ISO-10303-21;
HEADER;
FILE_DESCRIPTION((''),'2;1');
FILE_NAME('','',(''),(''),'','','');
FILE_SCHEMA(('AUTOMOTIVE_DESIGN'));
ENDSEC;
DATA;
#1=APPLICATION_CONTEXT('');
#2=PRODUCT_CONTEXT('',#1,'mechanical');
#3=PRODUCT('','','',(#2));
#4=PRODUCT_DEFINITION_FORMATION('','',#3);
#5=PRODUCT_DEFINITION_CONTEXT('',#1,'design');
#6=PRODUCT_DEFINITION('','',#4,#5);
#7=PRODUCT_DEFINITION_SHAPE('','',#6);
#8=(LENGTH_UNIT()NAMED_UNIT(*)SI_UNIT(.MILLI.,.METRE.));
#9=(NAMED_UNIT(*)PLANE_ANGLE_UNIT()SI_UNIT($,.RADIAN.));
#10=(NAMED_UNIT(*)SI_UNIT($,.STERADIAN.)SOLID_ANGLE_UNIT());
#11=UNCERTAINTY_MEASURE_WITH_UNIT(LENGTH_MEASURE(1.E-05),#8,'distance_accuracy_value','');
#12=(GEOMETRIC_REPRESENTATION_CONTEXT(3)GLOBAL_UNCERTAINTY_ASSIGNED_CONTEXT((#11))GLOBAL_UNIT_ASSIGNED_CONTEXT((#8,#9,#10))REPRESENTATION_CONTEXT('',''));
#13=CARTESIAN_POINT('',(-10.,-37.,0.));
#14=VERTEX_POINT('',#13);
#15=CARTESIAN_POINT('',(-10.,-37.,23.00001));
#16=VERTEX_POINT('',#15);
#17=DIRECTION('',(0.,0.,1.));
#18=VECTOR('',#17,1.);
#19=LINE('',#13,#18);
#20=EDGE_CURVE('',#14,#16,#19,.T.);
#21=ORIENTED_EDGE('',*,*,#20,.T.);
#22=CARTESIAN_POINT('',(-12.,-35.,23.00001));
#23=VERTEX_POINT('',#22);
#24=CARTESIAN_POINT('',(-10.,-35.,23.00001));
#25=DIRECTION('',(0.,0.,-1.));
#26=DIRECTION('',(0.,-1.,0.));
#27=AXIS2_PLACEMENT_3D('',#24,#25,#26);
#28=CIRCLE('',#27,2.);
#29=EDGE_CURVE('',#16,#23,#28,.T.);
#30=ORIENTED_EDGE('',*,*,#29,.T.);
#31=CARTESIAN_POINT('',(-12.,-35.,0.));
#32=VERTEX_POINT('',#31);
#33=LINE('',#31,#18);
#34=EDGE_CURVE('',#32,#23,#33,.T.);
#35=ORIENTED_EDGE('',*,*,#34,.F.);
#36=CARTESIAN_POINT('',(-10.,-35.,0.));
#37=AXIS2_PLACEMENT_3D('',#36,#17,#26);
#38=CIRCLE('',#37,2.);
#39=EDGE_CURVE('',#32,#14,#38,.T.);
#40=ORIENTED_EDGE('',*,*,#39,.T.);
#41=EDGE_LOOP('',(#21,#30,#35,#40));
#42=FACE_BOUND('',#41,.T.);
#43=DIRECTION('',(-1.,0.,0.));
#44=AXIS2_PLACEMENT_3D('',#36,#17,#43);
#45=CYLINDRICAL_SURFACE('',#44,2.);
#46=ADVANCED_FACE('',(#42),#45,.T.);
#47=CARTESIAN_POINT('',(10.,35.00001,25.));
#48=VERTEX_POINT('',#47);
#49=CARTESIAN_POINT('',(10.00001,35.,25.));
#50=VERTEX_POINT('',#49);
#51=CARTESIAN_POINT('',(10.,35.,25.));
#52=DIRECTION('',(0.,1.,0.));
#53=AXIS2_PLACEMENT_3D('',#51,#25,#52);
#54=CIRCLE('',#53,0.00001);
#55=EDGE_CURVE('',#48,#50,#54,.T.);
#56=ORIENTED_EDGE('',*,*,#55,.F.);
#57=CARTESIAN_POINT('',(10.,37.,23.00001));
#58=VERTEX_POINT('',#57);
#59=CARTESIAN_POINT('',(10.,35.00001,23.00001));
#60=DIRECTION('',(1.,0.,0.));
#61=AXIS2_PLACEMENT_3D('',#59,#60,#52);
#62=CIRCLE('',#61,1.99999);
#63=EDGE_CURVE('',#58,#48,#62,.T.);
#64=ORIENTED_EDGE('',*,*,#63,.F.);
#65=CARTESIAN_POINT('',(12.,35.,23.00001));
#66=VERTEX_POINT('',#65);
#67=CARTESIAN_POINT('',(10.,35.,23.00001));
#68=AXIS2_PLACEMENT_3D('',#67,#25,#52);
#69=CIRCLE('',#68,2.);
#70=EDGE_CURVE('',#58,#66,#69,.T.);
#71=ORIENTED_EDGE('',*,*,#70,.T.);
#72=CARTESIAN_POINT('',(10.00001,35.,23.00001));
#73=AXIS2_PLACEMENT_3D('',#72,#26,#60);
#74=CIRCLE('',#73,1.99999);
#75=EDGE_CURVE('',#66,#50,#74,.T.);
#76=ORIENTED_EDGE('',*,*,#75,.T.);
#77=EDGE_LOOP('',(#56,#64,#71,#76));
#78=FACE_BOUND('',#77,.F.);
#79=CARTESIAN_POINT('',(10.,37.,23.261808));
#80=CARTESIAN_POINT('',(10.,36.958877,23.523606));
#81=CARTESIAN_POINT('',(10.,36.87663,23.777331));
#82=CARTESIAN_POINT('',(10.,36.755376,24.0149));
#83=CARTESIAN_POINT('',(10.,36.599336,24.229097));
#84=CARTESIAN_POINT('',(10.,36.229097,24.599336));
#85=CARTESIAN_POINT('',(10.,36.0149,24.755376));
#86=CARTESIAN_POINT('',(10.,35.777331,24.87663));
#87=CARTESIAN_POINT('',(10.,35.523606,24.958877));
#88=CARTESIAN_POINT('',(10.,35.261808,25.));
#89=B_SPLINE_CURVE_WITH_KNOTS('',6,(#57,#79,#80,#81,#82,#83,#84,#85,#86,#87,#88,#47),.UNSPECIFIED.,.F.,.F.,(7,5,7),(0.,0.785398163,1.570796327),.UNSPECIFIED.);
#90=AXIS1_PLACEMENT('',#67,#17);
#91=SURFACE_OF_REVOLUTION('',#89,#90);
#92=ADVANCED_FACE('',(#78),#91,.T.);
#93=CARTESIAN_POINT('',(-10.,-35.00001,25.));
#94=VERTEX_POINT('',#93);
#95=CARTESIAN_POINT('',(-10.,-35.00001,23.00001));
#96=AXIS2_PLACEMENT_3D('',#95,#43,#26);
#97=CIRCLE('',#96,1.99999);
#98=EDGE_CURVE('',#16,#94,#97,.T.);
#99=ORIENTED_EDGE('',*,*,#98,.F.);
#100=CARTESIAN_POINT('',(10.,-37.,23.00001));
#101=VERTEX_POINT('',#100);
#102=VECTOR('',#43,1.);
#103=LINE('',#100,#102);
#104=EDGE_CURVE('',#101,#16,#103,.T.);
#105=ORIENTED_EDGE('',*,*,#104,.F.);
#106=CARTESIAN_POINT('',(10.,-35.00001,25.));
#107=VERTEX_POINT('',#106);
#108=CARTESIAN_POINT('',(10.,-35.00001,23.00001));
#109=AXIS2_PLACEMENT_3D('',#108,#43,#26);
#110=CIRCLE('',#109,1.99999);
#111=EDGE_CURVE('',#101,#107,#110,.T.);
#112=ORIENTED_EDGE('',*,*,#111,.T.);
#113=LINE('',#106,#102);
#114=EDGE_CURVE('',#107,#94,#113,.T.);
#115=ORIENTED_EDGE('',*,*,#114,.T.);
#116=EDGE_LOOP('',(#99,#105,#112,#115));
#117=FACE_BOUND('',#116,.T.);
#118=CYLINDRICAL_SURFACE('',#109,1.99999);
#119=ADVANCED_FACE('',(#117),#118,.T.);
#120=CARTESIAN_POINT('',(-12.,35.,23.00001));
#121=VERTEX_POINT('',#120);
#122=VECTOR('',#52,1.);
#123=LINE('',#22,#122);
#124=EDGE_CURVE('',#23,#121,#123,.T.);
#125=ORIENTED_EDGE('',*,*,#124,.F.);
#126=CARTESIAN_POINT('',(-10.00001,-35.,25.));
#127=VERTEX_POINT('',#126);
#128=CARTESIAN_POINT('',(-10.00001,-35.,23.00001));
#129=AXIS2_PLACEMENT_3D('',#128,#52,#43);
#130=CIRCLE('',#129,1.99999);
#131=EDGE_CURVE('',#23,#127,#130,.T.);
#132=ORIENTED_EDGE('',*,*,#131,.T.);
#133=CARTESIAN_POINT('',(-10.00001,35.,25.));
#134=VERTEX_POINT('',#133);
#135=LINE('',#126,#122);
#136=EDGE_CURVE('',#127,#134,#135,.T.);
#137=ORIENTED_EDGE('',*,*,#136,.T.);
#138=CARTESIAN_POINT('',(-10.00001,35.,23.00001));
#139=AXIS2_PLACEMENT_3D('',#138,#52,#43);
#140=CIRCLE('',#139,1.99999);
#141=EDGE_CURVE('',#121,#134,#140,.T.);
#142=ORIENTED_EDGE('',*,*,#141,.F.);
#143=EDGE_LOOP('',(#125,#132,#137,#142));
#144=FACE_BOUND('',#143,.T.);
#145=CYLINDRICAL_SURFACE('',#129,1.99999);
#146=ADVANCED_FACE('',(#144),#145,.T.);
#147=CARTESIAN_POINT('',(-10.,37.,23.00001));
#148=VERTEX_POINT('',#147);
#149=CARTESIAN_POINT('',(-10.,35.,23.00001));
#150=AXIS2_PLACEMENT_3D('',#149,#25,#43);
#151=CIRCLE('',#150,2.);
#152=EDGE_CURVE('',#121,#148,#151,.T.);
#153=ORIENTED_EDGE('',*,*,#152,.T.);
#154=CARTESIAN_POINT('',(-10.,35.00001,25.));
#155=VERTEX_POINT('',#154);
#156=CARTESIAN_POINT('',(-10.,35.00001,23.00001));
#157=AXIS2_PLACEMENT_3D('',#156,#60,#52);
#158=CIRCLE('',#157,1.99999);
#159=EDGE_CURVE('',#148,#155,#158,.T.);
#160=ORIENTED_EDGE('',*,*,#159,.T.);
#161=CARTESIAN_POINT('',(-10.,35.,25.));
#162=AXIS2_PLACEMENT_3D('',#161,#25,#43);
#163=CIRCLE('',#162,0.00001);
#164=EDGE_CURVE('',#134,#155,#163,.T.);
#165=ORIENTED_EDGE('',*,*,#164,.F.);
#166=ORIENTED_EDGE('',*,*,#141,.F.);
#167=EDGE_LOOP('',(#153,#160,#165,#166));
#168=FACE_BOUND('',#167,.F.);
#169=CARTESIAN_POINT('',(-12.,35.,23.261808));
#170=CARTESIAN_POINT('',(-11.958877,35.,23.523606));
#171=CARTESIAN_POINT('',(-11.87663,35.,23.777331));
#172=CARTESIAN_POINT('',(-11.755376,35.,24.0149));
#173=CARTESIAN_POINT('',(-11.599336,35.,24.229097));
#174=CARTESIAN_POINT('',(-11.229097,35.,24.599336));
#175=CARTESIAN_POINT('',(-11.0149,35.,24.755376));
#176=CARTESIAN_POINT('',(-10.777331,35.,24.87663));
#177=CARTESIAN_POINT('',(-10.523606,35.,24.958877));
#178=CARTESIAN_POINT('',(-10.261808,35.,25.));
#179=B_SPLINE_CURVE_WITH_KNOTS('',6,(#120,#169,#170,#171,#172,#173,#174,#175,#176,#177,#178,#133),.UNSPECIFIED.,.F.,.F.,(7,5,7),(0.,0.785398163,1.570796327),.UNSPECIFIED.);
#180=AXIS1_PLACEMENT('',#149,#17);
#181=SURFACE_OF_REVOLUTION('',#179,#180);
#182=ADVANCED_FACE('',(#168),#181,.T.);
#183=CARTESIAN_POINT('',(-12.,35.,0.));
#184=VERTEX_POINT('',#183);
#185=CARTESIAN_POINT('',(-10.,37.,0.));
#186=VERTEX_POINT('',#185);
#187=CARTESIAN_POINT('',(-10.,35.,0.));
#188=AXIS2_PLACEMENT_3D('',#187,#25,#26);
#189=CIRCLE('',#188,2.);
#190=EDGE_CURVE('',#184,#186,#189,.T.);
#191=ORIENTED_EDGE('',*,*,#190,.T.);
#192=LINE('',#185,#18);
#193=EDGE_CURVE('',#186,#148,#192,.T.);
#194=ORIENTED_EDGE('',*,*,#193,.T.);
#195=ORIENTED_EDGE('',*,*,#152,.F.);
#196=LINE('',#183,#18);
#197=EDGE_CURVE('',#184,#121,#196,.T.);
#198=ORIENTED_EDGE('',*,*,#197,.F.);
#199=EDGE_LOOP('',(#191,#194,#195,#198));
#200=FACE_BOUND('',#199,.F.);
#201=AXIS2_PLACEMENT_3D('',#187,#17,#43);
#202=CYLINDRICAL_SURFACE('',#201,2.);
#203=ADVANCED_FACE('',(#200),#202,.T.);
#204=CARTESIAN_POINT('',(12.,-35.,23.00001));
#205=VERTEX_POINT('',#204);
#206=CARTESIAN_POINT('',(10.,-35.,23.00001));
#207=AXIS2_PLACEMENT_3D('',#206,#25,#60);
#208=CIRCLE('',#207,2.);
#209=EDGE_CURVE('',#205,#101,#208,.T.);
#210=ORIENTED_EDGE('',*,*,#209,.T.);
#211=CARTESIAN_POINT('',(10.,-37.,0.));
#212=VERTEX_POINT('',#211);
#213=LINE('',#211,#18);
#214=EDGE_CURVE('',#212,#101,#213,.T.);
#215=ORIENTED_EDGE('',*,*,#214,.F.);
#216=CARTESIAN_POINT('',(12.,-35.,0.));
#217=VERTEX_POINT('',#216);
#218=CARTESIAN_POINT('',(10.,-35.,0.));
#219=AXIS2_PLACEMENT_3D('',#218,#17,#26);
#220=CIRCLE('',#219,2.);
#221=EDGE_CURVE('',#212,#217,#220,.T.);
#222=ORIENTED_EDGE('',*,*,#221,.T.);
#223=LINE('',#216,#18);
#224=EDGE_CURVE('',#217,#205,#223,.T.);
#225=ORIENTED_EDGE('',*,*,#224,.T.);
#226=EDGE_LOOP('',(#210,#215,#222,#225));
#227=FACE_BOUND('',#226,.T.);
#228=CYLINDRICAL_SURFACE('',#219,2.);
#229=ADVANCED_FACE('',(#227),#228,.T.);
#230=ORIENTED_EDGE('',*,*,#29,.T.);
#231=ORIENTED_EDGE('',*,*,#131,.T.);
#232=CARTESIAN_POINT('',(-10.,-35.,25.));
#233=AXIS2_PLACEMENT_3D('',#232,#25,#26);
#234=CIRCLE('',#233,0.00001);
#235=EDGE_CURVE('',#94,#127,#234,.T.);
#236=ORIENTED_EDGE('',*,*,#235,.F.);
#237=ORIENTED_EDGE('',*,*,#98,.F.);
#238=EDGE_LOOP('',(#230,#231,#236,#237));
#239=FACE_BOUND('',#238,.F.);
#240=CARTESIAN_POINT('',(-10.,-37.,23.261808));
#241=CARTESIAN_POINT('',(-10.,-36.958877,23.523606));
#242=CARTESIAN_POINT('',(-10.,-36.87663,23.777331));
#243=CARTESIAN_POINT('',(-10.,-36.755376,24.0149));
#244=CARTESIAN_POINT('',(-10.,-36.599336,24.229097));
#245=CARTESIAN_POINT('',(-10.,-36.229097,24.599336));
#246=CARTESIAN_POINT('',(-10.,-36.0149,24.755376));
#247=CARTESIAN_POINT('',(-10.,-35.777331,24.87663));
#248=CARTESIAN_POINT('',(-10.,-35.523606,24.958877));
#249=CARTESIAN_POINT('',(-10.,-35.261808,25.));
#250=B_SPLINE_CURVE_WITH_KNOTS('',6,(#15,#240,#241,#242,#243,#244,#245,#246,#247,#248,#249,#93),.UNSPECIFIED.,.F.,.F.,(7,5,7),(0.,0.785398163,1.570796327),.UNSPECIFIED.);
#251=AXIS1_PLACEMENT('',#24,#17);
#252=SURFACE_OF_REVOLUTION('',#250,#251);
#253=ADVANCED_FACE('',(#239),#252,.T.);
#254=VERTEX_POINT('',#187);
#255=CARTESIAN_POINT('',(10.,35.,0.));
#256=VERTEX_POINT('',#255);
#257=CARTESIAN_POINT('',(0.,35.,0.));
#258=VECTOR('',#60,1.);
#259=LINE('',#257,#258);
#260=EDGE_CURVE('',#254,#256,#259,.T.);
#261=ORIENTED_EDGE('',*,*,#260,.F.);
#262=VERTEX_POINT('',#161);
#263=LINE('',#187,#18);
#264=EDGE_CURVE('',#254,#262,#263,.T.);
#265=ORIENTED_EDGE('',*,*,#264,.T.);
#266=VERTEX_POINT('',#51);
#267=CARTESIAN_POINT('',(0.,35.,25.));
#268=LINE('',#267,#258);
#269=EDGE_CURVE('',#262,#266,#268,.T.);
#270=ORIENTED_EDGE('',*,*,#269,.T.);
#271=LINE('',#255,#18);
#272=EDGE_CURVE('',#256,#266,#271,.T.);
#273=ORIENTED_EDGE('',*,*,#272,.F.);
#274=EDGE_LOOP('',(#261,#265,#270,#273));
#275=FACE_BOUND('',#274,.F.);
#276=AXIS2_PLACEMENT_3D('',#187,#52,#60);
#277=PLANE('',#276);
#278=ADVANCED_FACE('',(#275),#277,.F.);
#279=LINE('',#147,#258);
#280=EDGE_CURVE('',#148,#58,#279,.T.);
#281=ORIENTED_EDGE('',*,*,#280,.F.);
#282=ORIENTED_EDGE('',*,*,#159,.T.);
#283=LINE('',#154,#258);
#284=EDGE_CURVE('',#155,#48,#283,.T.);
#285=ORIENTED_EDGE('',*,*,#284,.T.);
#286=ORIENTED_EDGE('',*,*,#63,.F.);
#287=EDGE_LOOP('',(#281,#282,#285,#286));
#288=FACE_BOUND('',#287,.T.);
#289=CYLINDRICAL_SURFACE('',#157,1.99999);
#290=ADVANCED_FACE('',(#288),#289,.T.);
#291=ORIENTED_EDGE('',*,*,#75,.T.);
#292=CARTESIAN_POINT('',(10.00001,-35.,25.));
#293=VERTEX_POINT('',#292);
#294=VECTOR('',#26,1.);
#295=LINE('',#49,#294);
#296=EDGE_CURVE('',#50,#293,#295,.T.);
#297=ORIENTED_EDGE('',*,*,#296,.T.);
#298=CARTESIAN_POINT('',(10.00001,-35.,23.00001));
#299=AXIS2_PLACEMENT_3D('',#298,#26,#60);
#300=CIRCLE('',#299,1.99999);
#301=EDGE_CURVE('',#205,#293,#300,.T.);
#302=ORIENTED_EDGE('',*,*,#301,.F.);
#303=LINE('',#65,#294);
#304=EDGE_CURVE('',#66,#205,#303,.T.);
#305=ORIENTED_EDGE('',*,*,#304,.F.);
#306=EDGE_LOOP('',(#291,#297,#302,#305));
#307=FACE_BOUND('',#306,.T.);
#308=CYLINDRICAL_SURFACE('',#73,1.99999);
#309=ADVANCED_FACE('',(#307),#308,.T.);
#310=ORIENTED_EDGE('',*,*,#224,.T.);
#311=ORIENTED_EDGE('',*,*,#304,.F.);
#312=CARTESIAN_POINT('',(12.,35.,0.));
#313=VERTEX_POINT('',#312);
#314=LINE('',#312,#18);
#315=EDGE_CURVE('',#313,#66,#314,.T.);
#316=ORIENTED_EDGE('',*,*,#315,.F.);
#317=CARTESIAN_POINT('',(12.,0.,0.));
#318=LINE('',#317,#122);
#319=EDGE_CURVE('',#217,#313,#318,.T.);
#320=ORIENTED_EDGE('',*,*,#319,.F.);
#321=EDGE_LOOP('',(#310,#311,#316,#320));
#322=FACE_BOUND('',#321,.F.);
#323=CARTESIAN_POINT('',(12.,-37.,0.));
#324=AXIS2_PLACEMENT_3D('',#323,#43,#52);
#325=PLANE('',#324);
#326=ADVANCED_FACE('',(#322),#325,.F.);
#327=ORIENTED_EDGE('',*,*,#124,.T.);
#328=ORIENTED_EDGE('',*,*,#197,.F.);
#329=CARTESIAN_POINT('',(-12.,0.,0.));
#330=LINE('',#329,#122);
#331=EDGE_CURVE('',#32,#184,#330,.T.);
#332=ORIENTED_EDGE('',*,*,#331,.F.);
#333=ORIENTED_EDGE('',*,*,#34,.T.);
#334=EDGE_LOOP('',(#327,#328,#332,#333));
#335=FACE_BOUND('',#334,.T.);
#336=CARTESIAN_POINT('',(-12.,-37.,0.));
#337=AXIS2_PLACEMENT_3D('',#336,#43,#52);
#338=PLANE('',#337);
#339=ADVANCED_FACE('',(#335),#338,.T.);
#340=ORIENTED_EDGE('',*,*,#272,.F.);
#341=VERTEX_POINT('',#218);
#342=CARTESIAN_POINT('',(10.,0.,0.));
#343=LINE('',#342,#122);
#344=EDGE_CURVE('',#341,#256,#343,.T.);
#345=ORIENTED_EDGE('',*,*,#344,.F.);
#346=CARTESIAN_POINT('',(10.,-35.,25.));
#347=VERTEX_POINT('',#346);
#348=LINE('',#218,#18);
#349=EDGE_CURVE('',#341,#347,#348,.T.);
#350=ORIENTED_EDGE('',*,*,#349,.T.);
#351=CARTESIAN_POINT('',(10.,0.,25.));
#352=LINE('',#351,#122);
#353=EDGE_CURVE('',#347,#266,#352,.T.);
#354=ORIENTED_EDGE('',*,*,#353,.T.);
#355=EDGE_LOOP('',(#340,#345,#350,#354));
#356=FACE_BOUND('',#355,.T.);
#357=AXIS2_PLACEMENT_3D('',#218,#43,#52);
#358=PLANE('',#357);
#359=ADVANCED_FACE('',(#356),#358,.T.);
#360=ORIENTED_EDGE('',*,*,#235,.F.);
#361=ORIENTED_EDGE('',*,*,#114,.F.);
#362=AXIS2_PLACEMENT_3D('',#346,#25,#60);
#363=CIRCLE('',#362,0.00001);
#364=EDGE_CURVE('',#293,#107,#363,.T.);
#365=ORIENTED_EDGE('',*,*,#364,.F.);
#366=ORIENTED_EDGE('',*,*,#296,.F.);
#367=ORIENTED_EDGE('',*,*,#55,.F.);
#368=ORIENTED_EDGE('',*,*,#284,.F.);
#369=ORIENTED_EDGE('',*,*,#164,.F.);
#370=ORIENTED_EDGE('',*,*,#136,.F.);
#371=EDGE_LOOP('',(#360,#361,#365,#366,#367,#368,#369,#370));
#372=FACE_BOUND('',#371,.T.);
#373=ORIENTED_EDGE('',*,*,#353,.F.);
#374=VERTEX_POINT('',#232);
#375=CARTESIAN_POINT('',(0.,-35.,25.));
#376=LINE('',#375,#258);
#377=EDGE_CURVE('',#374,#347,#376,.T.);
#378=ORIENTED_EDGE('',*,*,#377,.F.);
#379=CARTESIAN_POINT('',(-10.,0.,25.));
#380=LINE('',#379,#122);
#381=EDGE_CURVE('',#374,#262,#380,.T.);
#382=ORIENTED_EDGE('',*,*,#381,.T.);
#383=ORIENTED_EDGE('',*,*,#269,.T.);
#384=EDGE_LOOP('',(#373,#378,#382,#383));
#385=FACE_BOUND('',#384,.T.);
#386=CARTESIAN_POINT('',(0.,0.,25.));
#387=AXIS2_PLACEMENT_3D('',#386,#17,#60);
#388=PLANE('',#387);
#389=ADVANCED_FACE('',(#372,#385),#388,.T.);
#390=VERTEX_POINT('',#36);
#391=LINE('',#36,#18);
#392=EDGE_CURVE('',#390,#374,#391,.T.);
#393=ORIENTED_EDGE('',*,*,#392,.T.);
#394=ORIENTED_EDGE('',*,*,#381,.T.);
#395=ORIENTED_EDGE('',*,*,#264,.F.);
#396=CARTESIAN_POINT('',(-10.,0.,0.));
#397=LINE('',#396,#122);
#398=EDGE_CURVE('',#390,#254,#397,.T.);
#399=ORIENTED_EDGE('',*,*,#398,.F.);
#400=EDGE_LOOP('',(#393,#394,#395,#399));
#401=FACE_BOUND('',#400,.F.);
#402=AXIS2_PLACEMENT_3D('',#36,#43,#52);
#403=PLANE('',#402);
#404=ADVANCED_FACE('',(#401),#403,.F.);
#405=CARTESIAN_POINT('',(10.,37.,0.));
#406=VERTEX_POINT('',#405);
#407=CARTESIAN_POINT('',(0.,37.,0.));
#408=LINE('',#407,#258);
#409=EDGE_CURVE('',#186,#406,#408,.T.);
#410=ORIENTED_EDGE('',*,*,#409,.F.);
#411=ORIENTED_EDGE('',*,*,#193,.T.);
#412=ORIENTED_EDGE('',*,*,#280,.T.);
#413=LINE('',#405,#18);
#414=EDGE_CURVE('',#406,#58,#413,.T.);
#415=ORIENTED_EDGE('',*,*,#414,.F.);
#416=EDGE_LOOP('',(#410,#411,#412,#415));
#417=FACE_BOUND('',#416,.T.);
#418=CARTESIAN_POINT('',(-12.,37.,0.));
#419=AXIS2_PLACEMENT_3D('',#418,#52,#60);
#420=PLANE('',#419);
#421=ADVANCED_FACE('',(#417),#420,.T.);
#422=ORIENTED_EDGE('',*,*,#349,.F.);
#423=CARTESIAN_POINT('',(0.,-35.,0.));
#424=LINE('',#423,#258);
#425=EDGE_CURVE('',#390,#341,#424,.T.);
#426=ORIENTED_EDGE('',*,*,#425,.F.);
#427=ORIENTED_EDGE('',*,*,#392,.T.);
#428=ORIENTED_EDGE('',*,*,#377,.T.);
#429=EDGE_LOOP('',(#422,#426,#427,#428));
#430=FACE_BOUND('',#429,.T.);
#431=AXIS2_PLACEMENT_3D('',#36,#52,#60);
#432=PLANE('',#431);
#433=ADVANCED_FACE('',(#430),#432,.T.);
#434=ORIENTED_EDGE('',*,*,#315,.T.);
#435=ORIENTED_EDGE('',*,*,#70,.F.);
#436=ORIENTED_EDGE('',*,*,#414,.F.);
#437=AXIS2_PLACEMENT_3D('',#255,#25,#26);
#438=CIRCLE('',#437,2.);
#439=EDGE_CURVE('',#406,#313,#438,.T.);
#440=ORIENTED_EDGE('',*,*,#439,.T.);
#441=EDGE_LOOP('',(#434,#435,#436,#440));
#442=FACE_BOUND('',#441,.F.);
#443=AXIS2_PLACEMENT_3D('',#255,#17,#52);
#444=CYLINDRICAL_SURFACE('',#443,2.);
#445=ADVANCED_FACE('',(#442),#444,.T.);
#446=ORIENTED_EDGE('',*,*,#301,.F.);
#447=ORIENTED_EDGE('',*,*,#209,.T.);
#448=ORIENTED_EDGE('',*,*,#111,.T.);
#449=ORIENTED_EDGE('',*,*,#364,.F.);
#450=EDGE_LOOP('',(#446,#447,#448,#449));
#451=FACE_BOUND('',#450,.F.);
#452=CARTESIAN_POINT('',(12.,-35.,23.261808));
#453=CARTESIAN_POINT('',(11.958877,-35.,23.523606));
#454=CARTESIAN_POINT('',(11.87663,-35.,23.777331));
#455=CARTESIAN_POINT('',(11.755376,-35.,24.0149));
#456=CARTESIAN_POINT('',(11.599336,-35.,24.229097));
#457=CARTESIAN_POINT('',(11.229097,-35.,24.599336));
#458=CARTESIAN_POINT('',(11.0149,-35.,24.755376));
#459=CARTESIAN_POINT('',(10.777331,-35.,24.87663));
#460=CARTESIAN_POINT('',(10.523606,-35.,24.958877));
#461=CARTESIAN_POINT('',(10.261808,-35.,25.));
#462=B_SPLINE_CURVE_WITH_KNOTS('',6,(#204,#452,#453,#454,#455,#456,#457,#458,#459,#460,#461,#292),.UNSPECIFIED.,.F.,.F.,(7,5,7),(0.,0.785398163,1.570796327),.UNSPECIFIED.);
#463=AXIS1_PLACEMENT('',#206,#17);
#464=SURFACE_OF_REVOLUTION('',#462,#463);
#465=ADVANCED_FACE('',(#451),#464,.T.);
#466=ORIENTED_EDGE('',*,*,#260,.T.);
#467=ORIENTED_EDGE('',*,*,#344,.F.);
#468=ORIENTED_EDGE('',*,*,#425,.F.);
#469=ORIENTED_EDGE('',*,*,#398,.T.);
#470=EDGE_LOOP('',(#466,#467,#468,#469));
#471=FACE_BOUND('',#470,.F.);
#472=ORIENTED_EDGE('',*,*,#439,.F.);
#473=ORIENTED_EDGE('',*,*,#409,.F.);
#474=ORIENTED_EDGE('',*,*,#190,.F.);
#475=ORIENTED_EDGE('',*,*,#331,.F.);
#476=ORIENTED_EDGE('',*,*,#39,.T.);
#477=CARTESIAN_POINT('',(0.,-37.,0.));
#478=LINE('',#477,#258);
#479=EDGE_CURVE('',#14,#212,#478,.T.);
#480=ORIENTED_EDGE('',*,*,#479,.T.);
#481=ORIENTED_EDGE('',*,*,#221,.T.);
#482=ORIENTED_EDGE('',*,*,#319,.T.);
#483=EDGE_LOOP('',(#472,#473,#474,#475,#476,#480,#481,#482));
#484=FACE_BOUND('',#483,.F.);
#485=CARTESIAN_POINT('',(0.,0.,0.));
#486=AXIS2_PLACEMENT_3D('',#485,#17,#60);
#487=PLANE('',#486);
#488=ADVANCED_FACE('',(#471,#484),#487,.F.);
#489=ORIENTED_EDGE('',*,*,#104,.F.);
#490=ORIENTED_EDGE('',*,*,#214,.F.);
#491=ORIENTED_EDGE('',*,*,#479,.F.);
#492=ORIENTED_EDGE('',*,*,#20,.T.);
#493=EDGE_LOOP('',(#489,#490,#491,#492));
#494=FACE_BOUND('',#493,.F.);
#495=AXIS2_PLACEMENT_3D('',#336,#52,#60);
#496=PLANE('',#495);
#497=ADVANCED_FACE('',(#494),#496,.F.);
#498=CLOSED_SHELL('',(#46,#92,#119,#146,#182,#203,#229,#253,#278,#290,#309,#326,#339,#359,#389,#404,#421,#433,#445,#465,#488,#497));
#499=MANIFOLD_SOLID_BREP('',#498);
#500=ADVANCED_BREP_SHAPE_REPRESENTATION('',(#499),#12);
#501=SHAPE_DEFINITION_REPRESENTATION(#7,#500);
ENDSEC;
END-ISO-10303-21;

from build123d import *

# Parameters (mm, degrees)
F0_W     = 24
F0_H     = 74
F0_W_2   = 20
F0_H_2   = 70
F1_DEPTH = 25
F2_R     = 2
F3_R     = 1.99999


# Not quite as in the source:
# - a fillet or chamfer is up to 0.001 mm smaller than in the source, because OpenCascade refuses the exact size


with BuildPart() as f1:
    # F0 (on Top) → F1 (new body)
    with BuildSketch(Plane.XY):
        Rectangle(F0_W, F0_H)
        Rectangle(F0_W_2, F0_H_2, mode=Mode.SUBTRACT)
    extrude(amount=F1_DEPTH)

    # F2
    f2_edges = [f1.edges().sort_by_distance(p)[0] for p in [
        (-12, -37, 12.5),
        (12, -37, 12.5),
        (12, 37, 12.5),
        (-12, 37, 12.5),
    ]]
    fillet(f2_edges, radius=F2_R)

    # F3 (radius 2 in the source; OpenCascade refuses exactly that, so slightly less here)
    f3_edges = [f1.edges().sort_by_distance(p)[0] for p in [
        (-12, 0, 25),
    ]]
    fillet(f3_edges, radius=F3_R)


solid = f1.part
